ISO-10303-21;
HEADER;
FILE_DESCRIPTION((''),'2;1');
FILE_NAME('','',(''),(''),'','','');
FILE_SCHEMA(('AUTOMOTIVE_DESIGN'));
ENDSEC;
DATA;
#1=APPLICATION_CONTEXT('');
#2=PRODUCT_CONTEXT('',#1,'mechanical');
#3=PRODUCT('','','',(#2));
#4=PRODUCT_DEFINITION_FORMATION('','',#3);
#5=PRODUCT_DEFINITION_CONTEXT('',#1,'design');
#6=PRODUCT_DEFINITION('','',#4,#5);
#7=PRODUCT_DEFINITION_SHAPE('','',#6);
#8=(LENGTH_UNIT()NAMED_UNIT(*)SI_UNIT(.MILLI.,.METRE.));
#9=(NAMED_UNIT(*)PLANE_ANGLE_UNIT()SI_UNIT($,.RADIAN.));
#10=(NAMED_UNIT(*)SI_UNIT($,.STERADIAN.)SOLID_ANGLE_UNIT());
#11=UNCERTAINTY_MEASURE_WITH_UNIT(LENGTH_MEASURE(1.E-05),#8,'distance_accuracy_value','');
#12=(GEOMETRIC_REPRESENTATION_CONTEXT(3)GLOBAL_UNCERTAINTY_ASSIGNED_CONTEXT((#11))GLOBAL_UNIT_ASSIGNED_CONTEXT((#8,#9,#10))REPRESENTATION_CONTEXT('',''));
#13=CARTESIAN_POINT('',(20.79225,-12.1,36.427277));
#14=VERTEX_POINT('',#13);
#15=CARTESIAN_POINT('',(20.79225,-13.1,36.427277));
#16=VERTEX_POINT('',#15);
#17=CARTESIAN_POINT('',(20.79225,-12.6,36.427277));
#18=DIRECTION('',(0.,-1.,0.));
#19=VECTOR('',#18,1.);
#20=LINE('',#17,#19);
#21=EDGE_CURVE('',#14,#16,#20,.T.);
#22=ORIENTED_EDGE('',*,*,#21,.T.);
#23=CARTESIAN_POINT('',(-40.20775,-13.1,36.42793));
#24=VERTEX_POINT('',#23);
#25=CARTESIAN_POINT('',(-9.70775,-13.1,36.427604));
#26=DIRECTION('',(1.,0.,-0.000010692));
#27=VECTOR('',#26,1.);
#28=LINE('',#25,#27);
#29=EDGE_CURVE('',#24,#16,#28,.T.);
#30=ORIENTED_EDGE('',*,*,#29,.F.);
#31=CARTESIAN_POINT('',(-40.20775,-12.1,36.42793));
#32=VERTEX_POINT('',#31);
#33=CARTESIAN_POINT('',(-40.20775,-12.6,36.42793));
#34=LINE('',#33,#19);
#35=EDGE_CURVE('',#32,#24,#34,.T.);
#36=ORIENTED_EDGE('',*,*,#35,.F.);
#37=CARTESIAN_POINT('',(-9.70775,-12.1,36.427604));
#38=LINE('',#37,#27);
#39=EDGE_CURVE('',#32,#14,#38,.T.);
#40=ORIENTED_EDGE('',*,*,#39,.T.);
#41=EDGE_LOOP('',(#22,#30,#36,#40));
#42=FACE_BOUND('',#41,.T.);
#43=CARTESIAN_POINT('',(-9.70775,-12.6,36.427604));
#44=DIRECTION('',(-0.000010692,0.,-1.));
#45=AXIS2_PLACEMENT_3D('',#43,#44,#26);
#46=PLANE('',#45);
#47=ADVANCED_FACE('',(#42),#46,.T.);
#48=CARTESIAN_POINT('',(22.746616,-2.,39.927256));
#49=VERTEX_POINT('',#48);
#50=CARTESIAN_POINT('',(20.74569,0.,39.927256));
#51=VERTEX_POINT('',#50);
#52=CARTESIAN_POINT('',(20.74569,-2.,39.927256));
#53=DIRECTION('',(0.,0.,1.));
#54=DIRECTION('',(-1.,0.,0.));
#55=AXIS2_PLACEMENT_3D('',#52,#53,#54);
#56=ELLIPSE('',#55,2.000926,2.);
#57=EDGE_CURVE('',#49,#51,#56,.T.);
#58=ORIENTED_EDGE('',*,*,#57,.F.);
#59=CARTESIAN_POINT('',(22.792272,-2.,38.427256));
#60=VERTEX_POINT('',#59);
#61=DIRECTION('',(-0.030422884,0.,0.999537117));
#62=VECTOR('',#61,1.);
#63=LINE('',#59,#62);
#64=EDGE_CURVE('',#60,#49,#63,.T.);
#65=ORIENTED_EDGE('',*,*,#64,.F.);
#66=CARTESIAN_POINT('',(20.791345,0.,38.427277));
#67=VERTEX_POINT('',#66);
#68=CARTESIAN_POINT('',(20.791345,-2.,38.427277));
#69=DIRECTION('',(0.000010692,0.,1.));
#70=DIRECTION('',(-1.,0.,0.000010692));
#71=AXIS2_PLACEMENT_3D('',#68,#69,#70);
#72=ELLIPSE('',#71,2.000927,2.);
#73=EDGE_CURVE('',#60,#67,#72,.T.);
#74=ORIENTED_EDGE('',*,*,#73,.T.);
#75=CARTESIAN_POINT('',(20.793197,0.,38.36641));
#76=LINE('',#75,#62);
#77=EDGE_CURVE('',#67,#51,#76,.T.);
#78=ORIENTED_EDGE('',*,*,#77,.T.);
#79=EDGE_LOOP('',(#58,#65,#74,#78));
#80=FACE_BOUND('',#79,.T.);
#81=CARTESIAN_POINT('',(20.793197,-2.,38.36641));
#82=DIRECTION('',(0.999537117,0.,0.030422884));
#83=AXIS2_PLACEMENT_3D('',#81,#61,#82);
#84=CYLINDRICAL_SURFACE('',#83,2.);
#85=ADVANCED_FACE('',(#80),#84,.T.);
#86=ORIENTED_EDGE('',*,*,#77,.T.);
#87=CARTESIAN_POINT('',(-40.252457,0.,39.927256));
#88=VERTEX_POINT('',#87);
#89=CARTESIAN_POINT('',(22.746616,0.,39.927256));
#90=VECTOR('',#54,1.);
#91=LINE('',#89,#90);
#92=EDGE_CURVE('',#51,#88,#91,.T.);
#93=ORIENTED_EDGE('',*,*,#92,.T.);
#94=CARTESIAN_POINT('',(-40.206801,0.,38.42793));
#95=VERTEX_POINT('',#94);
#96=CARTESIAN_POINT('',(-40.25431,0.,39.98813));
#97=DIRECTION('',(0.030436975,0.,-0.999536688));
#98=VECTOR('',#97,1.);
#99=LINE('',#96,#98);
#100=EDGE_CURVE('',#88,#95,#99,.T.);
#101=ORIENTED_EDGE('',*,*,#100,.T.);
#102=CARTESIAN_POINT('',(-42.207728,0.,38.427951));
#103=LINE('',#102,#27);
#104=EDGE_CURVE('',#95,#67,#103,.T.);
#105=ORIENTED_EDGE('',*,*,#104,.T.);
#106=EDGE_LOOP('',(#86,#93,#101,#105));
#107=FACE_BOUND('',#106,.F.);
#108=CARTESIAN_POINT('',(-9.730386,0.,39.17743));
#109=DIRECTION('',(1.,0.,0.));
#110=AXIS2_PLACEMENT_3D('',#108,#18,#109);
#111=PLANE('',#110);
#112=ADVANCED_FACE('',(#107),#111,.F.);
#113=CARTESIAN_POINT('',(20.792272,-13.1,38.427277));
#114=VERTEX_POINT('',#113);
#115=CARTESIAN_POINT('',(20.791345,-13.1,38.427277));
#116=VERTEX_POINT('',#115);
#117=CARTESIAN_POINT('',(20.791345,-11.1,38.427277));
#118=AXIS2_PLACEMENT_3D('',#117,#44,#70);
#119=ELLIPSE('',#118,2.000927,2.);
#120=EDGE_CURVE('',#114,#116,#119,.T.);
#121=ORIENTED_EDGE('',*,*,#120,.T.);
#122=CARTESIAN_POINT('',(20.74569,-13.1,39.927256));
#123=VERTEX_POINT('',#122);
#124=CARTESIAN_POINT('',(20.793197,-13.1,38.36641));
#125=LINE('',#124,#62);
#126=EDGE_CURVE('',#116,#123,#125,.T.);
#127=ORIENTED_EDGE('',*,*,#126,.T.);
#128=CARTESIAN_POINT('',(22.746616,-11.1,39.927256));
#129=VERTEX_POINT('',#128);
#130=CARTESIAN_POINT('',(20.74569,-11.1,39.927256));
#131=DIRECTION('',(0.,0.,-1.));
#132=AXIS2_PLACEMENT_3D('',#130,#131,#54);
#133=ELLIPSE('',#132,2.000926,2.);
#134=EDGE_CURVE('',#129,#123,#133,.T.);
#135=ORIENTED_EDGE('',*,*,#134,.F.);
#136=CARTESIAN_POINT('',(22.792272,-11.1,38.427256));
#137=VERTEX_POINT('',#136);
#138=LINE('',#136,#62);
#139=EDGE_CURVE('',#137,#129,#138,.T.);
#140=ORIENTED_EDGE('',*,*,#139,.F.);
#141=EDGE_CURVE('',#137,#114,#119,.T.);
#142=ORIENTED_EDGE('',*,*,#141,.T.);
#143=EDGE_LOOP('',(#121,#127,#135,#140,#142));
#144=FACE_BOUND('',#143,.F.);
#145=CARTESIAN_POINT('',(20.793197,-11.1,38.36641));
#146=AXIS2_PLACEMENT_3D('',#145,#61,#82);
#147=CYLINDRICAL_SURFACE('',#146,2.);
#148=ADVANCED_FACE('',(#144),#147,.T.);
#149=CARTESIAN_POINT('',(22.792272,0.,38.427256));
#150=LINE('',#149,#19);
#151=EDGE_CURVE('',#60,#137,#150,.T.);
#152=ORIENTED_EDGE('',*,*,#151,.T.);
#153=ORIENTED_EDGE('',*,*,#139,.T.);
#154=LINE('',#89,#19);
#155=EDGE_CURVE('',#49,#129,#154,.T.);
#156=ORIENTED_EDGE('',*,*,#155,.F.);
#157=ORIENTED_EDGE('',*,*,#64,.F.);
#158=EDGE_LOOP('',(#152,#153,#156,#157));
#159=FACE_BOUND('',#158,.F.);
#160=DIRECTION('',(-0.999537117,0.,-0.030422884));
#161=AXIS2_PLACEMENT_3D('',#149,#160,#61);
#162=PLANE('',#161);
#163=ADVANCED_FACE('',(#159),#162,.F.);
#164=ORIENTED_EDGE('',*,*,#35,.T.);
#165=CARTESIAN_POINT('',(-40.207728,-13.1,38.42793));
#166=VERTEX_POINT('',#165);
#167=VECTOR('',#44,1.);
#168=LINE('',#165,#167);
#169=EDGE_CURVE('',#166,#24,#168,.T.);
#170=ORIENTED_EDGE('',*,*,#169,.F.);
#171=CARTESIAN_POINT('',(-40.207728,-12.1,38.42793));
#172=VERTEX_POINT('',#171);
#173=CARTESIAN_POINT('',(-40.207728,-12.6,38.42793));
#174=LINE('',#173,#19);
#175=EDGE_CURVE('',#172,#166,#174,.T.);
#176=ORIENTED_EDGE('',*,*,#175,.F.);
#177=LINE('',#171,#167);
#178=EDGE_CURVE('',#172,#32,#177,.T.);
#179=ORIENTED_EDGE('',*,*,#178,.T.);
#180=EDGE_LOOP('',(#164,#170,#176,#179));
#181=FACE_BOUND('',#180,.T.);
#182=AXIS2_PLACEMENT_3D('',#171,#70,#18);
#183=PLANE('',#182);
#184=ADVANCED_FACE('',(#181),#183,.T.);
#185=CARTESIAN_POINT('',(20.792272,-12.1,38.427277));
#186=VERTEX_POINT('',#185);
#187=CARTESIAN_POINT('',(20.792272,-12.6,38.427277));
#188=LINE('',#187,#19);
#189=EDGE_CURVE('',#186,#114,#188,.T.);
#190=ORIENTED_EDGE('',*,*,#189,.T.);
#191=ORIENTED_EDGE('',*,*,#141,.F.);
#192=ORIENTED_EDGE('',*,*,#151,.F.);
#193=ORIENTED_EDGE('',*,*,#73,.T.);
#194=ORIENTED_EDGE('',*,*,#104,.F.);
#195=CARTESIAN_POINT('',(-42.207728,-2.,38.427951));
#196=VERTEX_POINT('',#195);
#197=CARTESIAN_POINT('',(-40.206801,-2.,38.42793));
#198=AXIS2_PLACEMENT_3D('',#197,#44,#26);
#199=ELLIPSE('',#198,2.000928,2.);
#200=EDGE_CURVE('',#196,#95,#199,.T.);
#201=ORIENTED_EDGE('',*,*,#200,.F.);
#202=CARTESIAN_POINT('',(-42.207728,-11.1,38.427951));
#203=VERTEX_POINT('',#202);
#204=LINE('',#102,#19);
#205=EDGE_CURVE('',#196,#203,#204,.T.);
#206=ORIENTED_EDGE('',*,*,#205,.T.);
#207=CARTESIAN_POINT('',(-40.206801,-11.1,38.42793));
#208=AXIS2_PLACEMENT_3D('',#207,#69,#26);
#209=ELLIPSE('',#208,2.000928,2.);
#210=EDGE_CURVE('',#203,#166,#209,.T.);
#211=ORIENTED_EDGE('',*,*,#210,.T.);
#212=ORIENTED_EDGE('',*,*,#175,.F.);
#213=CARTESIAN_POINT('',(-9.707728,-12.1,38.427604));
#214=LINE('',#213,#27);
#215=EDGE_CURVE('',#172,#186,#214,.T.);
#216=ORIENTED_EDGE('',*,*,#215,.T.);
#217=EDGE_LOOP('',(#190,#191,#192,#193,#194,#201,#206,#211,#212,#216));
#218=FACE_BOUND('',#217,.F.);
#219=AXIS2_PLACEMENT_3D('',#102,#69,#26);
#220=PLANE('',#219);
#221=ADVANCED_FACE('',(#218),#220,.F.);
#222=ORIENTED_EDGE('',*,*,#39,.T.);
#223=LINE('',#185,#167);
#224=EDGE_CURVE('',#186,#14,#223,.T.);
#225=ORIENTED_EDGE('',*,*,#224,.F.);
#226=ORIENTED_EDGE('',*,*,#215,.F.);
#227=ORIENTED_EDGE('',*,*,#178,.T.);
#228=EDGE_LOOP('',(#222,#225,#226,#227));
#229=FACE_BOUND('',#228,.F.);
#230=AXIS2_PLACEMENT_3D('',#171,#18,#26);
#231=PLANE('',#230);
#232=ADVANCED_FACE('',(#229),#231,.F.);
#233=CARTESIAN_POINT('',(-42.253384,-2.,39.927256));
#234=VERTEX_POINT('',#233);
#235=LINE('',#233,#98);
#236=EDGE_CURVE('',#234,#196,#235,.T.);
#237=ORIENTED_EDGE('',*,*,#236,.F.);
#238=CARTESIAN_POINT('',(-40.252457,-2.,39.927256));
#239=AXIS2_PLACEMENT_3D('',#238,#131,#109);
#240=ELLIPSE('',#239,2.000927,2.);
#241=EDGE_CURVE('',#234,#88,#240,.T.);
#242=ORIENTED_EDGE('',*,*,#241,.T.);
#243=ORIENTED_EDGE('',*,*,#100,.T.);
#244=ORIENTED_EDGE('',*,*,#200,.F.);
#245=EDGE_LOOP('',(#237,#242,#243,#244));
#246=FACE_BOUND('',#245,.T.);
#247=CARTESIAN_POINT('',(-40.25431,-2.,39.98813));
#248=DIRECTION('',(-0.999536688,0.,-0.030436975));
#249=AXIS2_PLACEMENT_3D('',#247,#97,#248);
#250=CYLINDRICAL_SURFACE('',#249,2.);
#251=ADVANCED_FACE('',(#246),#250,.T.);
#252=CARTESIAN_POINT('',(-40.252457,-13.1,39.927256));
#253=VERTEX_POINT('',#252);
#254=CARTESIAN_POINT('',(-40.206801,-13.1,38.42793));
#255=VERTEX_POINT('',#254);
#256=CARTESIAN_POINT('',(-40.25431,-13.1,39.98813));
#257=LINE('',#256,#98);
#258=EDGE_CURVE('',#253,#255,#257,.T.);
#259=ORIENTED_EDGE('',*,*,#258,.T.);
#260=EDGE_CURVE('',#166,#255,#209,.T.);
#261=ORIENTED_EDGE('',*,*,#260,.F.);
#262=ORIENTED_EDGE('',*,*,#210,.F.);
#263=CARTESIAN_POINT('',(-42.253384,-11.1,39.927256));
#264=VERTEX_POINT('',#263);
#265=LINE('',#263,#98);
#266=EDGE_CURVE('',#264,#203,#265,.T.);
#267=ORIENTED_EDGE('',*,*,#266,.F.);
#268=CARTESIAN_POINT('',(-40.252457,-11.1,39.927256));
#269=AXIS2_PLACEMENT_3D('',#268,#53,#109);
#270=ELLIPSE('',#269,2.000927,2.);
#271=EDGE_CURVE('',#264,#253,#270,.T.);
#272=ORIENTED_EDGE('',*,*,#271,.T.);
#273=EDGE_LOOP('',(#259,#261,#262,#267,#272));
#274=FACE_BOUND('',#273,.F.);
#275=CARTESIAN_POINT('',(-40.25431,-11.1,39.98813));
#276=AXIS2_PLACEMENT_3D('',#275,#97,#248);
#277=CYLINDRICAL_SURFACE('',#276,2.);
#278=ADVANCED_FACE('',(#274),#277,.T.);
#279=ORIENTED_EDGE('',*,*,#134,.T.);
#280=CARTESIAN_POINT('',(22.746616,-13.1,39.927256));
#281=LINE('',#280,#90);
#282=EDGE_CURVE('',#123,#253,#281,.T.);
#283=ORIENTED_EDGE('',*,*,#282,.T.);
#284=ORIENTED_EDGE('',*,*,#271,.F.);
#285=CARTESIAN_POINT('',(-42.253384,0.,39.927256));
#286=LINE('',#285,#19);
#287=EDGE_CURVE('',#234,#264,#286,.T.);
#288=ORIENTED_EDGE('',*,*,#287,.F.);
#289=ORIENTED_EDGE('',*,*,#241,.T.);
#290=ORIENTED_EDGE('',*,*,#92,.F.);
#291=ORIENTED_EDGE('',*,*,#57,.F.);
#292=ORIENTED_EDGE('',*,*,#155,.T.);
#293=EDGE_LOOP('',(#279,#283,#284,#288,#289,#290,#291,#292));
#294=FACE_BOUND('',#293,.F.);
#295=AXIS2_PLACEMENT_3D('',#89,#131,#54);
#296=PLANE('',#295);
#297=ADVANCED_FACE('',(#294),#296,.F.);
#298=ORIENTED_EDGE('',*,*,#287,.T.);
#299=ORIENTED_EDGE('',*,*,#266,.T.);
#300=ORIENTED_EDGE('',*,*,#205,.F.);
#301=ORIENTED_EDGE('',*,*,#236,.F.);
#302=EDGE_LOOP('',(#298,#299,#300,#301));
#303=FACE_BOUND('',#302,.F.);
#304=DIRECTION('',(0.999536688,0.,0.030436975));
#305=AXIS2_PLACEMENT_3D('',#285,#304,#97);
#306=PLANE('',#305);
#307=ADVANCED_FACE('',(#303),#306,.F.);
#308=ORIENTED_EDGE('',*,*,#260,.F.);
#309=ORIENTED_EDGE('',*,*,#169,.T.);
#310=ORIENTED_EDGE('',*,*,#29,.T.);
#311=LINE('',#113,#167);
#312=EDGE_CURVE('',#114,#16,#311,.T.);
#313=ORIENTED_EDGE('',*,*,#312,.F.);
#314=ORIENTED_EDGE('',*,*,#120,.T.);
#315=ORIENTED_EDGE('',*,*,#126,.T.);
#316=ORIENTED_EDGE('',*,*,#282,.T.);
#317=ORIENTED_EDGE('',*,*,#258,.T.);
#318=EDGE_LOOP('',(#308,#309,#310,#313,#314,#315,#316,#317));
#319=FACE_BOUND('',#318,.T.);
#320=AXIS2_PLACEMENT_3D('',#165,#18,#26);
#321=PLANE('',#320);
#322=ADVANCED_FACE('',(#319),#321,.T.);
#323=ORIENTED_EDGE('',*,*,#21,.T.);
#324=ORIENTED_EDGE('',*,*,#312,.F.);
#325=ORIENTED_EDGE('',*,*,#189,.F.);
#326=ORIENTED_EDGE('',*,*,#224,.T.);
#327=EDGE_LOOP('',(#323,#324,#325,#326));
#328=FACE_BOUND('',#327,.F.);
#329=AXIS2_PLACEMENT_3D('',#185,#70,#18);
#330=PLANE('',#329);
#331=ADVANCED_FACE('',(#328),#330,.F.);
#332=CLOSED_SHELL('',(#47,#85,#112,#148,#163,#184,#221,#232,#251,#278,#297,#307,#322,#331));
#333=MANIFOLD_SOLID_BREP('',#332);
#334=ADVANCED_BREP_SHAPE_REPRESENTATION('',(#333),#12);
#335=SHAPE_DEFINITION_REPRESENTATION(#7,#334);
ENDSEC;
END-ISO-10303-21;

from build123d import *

# Parameters (mm, degrees)
F1_DEPTH = 13.1
F3_R     = 2
F2_W     = 61
F2_H     = 1
F4_DEPTH = 2


# Not quite as in the source:
# - a feature names something its author has since deleted; it is built from what else it names


with BuildPart() as f1:
    # F0 (on Front) → F1 (new body)
    with BuildSketch(Plane.XZ):
        Polygon((22.7466161251, 39.9272560477), (-42.2533838749, 39.9272560477), (-42.2077284126, 38.4279510158), (22.7922715837, 38.4272560477), align=None)
    extrude(amount=F1_DEPTH)

    # F3
    f3_edges = [f1.edges().sort_by_distance(p)[0] for p in [
        (-42.230556, -13.1, 39.177604),
        (22.769444, -13.1, 39.177256),
        (22.769444, 0, 39.177256),
        (-42.230556, 0, 39.177604),
    ]]
    fillet(f3_edges, radius=F3_R)

    # F2 (on face) → F4 (join)
    with BuildSketch(Plane(origin=(0.0004108598, 0, 38.4274997341), x_dir=(0.9999999999, 0, -1.06918e-05), z_dir=(-1.06918e-05, 0, -0.9999999999))):
        with Locations((-9.7081392748, 12.6)):
            Rectangle(F2_W, F2_H)
    extrude(amount=F4_DEPTH)


solid = f1.part
